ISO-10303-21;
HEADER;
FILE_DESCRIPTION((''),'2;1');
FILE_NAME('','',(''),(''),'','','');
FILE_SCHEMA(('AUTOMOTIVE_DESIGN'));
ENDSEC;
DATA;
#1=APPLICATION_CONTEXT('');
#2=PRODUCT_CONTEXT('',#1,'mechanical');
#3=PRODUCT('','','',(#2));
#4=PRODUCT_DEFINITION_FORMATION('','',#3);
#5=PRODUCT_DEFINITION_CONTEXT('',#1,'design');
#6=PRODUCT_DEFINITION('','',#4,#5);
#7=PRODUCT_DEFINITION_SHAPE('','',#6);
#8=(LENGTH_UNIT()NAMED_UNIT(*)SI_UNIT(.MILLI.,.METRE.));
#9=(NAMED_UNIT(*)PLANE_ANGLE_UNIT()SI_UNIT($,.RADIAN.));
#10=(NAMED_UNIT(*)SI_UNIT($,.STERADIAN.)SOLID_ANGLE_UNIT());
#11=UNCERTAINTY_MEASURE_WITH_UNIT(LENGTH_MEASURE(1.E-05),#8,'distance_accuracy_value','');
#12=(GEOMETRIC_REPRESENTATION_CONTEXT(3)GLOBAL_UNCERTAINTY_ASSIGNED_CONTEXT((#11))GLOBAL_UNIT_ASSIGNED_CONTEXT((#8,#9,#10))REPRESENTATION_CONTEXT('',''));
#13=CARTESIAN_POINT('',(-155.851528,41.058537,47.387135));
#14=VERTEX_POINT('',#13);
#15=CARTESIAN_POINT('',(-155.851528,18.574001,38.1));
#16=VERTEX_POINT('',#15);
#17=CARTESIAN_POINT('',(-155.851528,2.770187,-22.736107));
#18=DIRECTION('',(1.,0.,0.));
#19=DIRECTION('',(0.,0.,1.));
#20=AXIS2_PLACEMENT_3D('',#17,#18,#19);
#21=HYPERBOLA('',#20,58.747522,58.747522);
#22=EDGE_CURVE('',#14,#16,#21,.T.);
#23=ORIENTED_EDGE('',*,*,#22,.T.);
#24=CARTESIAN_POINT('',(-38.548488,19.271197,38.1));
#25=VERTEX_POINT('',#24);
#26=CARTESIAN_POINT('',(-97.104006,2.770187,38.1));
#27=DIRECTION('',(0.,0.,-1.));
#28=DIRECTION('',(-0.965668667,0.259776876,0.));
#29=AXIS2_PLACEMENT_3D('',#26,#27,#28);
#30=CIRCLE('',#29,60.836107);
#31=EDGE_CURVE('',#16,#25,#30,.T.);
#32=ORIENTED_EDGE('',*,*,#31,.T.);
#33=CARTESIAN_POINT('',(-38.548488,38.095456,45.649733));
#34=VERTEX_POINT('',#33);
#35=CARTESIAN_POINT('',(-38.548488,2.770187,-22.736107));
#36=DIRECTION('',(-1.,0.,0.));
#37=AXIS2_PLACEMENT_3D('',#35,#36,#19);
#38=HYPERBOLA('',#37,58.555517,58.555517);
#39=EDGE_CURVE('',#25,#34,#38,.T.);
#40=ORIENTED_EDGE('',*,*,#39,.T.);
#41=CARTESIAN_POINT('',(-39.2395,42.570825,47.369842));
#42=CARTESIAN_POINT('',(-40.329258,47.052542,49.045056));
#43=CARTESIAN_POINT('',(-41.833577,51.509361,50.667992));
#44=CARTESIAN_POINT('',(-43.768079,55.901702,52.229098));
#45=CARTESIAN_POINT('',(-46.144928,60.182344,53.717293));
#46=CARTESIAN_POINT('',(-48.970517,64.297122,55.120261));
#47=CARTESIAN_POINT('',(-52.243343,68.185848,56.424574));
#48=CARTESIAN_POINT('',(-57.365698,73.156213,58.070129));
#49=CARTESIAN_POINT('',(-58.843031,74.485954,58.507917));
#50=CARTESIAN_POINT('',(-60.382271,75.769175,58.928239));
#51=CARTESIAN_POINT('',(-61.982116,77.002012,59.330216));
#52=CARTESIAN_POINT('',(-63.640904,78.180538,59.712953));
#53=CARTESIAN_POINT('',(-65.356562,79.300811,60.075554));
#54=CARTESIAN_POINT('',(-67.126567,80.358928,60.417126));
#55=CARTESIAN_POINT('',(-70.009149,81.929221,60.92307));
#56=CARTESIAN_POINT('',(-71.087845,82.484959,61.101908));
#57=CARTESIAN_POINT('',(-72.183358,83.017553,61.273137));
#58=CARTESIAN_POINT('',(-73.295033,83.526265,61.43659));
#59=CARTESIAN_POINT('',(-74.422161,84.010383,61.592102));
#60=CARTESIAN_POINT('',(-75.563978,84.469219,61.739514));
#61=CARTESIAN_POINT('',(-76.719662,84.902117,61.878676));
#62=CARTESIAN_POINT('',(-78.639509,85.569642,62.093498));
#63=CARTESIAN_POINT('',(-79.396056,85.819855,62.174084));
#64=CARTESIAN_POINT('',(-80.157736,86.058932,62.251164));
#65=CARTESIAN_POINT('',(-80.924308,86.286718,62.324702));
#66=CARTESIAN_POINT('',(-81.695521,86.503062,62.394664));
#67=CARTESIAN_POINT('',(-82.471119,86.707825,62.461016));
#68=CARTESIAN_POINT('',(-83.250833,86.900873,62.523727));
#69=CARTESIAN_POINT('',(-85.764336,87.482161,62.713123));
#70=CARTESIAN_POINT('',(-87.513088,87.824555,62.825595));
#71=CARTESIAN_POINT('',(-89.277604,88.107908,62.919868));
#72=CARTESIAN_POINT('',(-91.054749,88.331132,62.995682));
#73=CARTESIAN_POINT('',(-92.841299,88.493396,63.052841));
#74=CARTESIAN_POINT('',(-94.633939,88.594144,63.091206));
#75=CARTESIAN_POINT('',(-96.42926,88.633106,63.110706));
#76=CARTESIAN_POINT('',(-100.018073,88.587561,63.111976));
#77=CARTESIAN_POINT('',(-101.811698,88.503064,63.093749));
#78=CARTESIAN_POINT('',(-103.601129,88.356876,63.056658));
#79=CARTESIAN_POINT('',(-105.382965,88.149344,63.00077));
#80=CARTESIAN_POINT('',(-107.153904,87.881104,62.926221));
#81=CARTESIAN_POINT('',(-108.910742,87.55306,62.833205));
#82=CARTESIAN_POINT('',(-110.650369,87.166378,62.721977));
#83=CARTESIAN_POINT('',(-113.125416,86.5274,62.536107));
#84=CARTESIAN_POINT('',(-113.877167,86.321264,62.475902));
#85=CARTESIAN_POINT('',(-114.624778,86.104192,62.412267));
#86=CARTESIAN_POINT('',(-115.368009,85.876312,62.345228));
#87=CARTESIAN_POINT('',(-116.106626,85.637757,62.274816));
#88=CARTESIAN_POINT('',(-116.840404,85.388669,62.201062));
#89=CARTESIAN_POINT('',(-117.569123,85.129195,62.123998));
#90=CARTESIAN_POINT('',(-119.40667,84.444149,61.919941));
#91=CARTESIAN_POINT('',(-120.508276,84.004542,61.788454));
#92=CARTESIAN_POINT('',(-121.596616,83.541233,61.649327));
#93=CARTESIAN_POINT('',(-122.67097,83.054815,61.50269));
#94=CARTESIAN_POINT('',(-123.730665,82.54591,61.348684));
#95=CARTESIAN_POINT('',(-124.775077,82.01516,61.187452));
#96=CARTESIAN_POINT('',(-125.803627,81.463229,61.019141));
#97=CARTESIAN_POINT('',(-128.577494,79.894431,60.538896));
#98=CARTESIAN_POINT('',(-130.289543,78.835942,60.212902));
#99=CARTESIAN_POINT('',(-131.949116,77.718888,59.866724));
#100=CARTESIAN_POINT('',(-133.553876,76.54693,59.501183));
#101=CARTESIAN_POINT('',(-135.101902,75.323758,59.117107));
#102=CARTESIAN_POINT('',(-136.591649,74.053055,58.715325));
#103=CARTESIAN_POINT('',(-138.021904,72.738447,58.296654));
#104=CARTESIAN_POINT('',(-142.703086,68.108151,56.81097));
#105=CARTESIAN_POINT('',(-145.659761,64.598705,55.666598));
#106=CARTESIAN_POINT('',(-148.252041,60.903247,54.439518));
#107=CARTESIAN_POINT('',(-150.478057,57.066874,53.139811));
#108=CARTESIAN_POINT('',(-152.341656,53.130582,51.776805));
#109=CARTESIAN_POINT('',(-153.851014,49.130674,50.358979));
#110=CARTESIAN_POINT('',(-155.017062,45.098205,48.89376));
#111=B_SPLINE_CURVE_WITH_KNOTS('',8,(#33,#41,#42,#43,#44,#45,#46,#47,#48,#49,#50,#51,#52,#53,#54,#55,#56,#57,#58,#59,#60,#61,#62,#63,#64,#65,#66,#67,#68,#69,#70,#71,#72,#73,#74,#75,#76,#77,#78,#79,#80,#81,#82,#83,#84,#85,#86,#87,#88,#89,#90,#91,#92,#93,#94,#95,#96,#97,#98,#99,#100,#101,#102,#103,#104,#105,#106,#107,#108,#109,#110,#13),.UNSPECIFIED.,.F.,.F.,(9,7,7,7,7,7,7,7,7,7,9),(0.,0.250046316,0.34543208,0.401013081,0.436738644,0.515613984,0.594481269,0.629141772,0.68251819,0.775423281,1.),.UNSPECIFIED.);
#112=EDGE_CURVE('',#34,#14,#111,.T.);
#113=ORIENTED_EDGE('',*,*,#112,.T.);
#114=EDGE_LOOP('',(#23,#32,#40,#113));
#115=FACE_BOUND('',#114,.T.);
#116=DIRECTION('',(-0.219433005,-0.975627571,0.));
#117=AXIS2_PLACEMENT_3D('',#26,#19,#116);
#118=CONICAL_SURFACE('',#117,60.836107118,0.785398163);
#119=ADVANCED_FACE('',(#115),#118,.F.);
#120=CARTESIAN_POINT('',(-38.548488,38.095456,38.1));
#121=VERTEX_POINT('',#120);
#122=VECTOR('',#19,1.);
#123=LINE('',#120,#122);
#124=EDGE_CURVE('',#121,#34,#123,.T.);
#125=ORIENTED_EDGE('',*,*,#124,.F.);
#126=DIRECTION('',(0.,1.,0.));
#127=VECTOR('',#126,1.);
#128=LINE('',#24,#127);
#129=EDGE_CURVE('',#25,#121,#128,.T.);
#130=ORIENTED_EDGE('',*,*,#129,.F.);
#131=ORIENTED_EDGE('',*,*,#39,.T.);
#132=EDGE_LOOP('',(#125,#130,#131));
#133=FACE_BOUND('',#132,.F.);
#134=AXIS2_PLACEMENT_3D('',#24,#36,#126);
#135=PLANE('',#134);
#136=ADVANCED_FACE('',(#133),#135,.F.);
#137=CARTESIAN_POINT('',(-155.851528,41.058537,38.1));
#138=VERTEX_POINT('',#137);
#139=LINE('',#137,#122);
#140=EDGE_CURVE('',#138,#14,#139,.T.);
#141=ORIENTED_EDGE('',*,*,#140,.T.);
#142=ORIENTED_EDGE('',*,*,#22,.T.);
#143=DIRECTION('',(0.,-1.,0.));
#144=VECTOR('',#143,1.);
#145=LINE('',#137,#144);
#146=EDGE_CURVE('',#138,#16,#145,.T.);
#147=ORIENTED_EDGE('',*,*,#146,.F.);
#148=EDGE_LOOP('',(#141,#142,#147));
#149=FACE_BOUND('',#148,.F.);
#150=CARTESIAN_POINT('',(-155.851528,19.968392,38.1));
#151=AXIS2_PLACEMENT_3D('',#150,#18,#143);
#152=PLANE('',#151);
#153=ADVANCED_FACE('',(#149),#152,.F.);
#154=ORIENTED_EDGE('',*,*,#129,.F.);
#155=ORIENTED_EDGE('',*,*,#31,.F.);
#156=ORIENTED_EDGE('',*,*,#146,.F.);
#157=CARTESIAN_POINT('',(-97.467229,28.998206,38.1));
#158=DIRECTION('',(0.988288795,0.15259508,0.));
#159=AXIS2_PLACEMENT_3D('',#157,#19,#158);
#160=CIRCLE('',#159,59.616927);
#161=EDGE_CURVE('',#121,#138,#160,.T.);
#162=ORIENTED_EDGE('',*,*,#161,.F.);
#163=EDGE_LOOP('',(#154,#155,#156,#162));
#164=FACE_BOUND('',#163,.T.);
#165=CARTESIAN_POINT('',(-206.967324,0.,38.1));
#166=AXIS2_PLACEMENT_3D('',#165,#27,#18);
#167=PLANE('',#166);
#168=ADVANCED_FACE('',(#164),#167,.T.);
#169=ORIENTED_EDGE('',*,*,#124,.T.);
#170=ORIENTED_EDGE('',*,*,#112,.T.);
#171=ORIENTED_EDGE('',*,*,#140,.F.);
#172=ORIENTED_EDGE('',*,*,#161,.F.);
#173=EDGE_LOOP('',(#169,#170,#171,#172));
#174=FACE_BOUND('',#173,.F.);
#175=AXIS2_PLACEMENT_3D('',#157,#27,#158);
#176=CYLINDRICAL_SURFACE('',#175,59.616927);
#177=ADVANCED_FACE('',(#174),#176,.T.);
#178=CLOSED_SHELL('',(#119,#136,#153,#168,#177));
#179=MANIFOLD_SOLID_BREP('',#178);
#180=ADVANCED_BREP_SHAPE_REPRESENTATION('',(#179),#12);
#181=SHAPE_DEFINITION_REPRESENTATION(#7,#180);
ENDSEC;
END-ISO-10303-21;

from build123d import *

# Parameters (mm, degrees)
F0_W        = 206.9673240185
F0_H        = 93.9061716199
F1_DEPTH    = 38.1
F3_DEPTH    = 38.1
F4_DEPTH    = 38.1
F5_T4_ANGLE = 333.9674626616
F6_W        = 206.9673240185
F6_H        = 38.1
F8_DEPTH    = 152.4


# Not quite as in the source:
# - a fillet or chamfer that OpenCascade refuses, or shapes differently, is made with other operations: its cross-section is extruded or revolved along the edge and cut away or added


with BuildPart() as f1:
    # F0 (on Top) → F1 (new body)
    with BuildSketch(Plane.XY):
        with Locations((-103.4836620092, 46.9530858099)):
            Rectangle(F0_W, F0_H)
    extrude(amount=F1_DEPTH)

    # F2 (on face) → F3 (join)
    with BuildSketch(Plane.XY.offset(38.1)):
        with BuildLine():
            Line((-38.5484881699, 19.2711967975), (-38.5484881699, 38.0954556167))
            ThreePointArc((-38.5484881699, 38.0954556167), (-95.9617823939, 88.596121937), (-155.8515280485, 41.0585366189))
            Line((-155.8515280485, 41.0585366189), (-155.8515280485, 19.9683923274))
            ThreePointArc((-155.8515280485, 19.9683923274), (-96.8534760925, 77.9237526804), (-38.5484881699, 19.2711967975))
        make_face()
    extrude(amount=F3_DEPTH)

    # F2 (on face) → F4 (join)
    with BuildSketch(Plane.XY.offset(38.1)):
        with BuildLine():
            ThreePointArc((-155.8515280485, 18.5740012676), (-97.4655811383, 63.6052200178), (-38.5484881699, 19.2711967975))
            ThreePointArc((-38.5484881699, 19.2711967975), (-96.8534760925, 77.9237526804), (-155.8515280485, 19.9683923274))
            Line((-155.8515280485, 19.9683923274), (-155.8515280485, 18.5740012676))
        make_face()
    extrude(amount=F4_DEPTH)

    # F5: chamfer of 38.1 on 1 edges, made by hand


with BuildPart() as f5_tool2:
    # F5_s3 → F5_t4 (revolve)
    with BuildSketch(Plane(origin=(-93.0214210663, 20.9218871248, 0), x_dir=(0, 0, 1), z_dir=(0.9756275706, -0.2194330045, 0))):
        Polygon((38.1, 79.4412595984), (76.2, 117.5412595984), (76.2, 79.4412595984), align=None)
    revolve(axis=Axis((-97.1040055743, 2.7701874098, 76.2), (0, 0, -1)), revolution_arc=F5_T4_ANGLE)

    split(bisect_by=Plane.XY.offset(38.1), keep=Keep.TOP)


with BuildPart() as f1_1:
    add(f1.part)

    # F5_t1: cut F5_tool2
    add(f5_tool2.part, mode=Mode.SUBTRACT)

    # F6 (on face) → F8 (cut)
    with BuildSketch(Plane.XZ):
        with Locations((-103.4836620092, 19.05)):
            Rectangle(F6_W, F6_H)
    extrude(amount=-F8_DEPTH, mode=Mode.SUBTRACT)


solid = f1_1.part
